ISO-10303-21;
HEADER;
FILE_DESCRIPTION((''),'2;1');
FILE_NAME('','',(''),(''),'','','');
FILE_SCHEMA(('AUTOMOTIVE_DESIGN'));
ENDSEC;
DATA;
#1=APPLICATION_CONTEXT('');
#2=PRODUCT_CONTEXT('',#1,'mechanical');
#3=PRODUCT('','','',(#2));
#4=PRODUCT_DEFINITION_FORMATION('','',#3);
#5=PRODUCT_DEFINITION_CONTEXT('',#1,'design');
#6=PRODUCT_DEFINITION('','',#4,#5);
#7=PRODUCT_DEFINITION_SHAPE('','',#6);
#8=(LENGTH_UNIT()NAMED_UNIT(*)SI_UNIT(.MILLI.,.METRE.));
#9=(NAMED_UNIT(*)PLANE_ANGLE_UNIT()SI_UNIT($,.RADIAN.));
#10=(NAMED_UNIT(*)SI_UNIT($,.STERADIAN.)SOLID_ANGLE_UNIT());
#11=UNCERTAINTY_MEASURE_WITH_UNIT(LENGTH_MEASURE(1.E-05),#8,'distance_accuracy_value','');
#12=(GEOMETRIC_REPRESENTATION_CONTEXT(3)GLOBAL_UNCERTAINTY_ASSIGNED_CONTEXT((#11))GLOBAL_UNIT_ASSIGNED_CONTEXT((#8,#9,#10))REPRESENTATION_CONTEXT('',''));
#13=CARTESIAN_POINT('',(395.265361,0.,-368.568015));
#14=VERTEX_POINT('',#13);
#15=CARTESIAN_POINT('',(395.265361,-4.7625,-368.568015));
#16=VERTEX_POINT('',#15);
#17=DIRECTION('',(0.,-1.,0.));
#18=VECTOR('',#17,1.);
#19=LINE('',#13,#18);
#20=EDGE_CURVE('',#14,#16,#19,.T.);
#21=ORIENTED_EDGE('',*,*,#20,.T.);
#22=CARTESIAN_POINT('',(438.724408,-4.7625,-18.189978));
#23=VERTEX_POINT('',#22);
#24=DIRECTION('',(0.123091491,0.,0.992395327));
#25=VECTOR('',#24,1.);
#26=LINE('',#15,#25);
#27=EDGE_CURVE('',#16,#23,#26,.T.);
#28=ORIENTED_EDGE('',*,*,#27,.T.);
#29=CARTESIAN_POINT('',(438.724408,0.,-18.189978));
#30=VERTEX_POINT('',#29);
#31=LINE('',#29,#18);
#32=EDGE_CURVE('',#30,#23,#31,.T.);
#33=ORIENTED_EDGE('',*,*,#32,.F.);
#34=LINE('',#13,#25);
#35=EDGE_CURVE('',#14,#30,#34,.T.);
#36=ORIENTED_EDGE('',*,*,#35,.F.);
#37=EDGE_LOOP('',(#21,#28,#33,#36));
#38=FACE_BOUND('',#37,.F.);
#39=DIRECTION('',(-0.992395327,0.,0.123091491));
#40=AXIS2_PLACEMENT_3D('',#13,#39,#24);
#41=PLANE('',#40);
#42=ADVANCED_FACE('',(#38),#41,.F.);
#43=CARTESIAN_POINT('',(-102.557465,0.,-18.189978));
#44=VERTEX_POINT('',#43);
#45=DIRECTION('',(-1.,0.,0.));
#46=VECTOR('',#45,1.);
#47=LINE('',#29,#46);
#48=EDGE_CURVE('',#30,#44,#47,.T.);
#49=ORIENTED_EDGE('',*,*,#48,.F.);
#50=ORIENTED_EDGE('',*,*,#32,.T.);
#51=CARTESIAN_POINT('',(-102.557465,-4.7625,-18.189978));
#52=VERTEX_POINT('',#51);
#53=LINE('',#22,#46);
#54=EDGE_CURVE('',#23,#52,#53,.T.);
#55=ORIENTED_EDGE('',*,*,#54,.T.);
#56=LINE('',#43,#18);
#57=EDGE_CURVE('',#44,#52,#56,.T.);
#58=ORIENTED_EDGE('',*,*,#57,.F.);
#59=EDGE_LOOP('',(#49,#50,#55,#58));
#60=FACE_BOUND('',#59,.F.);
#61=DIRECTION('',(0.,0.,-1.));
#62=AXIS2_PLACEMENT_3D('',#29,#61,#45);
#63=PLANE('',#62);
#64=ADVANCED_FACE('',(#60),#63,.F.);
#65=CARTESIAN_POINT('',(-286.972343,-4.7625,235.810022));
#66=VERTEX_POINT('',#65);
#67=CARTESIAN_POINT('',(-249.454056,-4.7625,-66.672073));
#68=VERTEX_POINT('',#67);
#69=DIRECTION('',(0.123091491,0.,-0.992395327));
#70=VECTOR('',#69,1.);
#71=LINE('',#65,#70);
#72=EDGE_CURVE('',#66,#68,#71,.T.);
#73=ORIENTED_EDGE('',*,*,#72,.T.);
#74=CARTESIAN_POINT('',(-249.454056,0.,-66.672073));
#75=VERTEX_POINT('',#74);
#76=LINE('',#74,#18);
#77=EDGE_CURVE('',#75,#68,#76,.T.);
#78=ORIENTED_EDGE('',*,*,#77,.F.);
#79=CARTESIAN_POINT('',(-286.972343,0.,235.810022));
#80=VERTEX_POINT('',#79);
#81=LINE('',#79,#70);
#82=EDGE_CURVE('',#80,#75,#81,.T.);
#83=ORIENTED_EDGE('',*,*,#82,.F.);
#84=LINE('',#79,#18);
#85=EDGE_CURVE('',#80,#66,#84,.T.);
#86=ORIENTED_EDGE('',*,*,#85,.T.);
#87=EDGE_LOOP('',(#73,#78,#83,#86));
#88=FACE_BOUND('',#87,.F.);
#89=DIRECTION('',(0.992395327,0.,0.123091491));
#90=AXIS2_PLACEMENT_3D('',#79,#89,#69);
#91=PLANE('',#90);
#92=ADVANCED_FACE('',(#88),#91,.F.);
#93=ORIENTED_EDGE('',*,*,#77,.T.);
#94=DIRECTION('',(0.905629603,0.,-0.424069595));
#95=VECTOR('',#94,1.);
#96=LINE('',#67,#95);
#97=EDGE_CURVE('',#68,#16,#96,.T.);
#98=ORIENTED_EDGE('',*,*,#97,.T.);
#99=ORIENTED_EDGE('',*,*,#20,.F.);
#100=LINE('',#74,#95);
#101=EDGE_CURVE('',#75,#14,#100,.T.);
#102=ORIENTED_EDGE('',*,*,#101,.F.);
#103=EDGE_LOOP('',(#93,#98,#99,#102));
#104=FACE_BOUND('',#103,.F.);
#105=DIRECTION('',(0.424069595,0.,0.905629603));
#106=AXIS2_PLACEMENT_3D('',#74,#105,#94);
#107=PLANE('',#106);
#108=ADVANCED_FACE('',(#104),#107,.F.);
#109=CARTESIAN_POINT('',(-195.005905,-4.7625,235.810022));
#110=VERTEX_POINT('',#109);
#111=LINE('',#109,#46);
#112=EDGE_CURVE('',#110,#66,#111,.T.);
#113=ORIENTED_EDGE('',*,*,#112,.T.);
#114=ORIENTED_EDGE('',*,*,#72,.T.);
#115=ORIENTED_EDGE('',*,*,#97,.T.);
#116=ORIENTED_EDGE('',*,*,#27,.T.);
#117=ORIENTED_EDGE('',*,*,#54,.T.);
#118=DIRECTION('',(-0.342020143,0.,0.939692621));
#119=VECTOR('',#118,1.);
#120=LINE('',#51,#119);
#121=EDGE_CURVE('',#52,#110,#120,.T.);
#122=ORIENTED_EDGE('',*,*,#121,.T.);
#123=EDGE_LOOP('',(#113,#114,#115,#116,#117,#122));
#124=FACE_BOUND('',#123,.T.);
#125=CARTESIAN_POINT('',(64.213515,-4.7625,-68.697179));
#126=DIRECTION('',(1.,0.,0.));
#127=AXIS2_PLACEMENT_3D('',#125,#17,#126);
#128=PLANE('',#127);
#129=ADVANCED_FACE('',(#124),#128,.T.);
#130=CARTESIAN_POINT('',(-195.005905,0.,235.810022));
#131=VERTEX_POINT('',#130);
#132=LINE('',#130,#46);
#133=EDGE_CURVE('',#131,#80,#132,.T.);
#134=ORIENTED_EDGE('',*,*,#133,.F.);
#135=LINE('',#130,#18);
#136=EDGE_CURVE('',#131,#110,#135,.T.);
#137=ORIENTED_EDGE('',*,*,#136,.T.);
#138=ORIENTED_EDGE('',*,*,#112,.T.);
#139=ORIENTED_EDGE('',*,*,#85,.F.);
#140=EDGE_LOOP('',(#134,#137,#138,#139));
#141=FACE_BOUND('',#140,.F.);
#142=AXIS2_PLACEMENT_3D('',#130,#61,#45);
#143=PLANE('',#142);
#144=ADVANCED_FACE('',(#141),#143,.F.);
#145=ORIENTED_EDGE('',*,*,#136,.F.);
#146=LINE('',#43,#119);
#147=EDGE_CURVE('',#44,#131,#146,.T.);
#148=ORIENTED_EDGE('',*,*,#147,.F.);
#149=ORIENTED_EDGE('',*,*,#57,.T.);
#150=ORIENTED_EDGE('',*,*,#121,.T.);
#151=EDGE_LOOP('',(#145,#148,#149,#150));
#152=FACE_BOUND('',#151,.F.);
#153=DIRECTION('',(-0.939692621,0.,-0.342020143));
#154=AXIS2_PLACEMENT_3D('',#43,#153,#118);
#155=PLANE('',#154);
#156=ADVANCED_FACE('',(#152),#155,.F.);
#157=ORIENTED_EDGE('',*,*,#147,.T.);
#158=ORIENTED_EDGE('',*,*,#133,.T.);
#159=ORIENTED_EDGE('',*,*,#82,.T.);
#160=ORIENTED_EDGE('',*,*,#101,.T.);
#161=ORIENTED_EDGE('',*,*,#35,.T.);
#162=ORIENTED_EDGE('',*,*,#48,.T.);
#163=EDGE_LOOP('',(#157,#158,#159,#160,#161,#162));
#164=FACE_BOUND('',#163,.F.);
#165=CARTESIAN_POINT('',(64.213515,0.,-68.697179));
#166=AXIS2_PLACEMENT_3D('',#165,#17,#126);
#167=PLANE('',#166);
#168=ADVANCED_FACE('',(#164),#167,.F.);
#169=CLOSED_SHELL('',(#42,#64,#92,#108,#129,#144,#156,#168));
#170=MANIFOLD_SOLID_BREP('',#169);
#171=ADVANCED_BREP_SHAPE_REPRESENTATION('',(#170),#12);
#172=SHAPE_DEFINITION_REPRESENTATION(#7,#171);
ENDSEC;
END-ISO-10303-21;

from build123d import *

# Parameters (mm, degrees)
F1_DEPTH = 4.7625


# Not quite as in the source:
# - a length typed as a fraction of an inch, garbled in the dataset ("3 / 203.2 mm" for 3/8 in), is restored


with BuildPart() as f1:
    # F0 (on Front) → F1 (new body)
    with BuildSketch(Plane.XZ):
        Polygon((-195.0059046725, 235.8100221782), (-286.9723427275, 235.8100221782), (-249.454056277, -66.6720734602), (395.2653609836, -368.5680152525), (438.7244078622, -18.1899778218), (-102.5574651689, -18.1899778218), align=None)
    extrude(amount=F1_DEPTH)


solid = f1.part
